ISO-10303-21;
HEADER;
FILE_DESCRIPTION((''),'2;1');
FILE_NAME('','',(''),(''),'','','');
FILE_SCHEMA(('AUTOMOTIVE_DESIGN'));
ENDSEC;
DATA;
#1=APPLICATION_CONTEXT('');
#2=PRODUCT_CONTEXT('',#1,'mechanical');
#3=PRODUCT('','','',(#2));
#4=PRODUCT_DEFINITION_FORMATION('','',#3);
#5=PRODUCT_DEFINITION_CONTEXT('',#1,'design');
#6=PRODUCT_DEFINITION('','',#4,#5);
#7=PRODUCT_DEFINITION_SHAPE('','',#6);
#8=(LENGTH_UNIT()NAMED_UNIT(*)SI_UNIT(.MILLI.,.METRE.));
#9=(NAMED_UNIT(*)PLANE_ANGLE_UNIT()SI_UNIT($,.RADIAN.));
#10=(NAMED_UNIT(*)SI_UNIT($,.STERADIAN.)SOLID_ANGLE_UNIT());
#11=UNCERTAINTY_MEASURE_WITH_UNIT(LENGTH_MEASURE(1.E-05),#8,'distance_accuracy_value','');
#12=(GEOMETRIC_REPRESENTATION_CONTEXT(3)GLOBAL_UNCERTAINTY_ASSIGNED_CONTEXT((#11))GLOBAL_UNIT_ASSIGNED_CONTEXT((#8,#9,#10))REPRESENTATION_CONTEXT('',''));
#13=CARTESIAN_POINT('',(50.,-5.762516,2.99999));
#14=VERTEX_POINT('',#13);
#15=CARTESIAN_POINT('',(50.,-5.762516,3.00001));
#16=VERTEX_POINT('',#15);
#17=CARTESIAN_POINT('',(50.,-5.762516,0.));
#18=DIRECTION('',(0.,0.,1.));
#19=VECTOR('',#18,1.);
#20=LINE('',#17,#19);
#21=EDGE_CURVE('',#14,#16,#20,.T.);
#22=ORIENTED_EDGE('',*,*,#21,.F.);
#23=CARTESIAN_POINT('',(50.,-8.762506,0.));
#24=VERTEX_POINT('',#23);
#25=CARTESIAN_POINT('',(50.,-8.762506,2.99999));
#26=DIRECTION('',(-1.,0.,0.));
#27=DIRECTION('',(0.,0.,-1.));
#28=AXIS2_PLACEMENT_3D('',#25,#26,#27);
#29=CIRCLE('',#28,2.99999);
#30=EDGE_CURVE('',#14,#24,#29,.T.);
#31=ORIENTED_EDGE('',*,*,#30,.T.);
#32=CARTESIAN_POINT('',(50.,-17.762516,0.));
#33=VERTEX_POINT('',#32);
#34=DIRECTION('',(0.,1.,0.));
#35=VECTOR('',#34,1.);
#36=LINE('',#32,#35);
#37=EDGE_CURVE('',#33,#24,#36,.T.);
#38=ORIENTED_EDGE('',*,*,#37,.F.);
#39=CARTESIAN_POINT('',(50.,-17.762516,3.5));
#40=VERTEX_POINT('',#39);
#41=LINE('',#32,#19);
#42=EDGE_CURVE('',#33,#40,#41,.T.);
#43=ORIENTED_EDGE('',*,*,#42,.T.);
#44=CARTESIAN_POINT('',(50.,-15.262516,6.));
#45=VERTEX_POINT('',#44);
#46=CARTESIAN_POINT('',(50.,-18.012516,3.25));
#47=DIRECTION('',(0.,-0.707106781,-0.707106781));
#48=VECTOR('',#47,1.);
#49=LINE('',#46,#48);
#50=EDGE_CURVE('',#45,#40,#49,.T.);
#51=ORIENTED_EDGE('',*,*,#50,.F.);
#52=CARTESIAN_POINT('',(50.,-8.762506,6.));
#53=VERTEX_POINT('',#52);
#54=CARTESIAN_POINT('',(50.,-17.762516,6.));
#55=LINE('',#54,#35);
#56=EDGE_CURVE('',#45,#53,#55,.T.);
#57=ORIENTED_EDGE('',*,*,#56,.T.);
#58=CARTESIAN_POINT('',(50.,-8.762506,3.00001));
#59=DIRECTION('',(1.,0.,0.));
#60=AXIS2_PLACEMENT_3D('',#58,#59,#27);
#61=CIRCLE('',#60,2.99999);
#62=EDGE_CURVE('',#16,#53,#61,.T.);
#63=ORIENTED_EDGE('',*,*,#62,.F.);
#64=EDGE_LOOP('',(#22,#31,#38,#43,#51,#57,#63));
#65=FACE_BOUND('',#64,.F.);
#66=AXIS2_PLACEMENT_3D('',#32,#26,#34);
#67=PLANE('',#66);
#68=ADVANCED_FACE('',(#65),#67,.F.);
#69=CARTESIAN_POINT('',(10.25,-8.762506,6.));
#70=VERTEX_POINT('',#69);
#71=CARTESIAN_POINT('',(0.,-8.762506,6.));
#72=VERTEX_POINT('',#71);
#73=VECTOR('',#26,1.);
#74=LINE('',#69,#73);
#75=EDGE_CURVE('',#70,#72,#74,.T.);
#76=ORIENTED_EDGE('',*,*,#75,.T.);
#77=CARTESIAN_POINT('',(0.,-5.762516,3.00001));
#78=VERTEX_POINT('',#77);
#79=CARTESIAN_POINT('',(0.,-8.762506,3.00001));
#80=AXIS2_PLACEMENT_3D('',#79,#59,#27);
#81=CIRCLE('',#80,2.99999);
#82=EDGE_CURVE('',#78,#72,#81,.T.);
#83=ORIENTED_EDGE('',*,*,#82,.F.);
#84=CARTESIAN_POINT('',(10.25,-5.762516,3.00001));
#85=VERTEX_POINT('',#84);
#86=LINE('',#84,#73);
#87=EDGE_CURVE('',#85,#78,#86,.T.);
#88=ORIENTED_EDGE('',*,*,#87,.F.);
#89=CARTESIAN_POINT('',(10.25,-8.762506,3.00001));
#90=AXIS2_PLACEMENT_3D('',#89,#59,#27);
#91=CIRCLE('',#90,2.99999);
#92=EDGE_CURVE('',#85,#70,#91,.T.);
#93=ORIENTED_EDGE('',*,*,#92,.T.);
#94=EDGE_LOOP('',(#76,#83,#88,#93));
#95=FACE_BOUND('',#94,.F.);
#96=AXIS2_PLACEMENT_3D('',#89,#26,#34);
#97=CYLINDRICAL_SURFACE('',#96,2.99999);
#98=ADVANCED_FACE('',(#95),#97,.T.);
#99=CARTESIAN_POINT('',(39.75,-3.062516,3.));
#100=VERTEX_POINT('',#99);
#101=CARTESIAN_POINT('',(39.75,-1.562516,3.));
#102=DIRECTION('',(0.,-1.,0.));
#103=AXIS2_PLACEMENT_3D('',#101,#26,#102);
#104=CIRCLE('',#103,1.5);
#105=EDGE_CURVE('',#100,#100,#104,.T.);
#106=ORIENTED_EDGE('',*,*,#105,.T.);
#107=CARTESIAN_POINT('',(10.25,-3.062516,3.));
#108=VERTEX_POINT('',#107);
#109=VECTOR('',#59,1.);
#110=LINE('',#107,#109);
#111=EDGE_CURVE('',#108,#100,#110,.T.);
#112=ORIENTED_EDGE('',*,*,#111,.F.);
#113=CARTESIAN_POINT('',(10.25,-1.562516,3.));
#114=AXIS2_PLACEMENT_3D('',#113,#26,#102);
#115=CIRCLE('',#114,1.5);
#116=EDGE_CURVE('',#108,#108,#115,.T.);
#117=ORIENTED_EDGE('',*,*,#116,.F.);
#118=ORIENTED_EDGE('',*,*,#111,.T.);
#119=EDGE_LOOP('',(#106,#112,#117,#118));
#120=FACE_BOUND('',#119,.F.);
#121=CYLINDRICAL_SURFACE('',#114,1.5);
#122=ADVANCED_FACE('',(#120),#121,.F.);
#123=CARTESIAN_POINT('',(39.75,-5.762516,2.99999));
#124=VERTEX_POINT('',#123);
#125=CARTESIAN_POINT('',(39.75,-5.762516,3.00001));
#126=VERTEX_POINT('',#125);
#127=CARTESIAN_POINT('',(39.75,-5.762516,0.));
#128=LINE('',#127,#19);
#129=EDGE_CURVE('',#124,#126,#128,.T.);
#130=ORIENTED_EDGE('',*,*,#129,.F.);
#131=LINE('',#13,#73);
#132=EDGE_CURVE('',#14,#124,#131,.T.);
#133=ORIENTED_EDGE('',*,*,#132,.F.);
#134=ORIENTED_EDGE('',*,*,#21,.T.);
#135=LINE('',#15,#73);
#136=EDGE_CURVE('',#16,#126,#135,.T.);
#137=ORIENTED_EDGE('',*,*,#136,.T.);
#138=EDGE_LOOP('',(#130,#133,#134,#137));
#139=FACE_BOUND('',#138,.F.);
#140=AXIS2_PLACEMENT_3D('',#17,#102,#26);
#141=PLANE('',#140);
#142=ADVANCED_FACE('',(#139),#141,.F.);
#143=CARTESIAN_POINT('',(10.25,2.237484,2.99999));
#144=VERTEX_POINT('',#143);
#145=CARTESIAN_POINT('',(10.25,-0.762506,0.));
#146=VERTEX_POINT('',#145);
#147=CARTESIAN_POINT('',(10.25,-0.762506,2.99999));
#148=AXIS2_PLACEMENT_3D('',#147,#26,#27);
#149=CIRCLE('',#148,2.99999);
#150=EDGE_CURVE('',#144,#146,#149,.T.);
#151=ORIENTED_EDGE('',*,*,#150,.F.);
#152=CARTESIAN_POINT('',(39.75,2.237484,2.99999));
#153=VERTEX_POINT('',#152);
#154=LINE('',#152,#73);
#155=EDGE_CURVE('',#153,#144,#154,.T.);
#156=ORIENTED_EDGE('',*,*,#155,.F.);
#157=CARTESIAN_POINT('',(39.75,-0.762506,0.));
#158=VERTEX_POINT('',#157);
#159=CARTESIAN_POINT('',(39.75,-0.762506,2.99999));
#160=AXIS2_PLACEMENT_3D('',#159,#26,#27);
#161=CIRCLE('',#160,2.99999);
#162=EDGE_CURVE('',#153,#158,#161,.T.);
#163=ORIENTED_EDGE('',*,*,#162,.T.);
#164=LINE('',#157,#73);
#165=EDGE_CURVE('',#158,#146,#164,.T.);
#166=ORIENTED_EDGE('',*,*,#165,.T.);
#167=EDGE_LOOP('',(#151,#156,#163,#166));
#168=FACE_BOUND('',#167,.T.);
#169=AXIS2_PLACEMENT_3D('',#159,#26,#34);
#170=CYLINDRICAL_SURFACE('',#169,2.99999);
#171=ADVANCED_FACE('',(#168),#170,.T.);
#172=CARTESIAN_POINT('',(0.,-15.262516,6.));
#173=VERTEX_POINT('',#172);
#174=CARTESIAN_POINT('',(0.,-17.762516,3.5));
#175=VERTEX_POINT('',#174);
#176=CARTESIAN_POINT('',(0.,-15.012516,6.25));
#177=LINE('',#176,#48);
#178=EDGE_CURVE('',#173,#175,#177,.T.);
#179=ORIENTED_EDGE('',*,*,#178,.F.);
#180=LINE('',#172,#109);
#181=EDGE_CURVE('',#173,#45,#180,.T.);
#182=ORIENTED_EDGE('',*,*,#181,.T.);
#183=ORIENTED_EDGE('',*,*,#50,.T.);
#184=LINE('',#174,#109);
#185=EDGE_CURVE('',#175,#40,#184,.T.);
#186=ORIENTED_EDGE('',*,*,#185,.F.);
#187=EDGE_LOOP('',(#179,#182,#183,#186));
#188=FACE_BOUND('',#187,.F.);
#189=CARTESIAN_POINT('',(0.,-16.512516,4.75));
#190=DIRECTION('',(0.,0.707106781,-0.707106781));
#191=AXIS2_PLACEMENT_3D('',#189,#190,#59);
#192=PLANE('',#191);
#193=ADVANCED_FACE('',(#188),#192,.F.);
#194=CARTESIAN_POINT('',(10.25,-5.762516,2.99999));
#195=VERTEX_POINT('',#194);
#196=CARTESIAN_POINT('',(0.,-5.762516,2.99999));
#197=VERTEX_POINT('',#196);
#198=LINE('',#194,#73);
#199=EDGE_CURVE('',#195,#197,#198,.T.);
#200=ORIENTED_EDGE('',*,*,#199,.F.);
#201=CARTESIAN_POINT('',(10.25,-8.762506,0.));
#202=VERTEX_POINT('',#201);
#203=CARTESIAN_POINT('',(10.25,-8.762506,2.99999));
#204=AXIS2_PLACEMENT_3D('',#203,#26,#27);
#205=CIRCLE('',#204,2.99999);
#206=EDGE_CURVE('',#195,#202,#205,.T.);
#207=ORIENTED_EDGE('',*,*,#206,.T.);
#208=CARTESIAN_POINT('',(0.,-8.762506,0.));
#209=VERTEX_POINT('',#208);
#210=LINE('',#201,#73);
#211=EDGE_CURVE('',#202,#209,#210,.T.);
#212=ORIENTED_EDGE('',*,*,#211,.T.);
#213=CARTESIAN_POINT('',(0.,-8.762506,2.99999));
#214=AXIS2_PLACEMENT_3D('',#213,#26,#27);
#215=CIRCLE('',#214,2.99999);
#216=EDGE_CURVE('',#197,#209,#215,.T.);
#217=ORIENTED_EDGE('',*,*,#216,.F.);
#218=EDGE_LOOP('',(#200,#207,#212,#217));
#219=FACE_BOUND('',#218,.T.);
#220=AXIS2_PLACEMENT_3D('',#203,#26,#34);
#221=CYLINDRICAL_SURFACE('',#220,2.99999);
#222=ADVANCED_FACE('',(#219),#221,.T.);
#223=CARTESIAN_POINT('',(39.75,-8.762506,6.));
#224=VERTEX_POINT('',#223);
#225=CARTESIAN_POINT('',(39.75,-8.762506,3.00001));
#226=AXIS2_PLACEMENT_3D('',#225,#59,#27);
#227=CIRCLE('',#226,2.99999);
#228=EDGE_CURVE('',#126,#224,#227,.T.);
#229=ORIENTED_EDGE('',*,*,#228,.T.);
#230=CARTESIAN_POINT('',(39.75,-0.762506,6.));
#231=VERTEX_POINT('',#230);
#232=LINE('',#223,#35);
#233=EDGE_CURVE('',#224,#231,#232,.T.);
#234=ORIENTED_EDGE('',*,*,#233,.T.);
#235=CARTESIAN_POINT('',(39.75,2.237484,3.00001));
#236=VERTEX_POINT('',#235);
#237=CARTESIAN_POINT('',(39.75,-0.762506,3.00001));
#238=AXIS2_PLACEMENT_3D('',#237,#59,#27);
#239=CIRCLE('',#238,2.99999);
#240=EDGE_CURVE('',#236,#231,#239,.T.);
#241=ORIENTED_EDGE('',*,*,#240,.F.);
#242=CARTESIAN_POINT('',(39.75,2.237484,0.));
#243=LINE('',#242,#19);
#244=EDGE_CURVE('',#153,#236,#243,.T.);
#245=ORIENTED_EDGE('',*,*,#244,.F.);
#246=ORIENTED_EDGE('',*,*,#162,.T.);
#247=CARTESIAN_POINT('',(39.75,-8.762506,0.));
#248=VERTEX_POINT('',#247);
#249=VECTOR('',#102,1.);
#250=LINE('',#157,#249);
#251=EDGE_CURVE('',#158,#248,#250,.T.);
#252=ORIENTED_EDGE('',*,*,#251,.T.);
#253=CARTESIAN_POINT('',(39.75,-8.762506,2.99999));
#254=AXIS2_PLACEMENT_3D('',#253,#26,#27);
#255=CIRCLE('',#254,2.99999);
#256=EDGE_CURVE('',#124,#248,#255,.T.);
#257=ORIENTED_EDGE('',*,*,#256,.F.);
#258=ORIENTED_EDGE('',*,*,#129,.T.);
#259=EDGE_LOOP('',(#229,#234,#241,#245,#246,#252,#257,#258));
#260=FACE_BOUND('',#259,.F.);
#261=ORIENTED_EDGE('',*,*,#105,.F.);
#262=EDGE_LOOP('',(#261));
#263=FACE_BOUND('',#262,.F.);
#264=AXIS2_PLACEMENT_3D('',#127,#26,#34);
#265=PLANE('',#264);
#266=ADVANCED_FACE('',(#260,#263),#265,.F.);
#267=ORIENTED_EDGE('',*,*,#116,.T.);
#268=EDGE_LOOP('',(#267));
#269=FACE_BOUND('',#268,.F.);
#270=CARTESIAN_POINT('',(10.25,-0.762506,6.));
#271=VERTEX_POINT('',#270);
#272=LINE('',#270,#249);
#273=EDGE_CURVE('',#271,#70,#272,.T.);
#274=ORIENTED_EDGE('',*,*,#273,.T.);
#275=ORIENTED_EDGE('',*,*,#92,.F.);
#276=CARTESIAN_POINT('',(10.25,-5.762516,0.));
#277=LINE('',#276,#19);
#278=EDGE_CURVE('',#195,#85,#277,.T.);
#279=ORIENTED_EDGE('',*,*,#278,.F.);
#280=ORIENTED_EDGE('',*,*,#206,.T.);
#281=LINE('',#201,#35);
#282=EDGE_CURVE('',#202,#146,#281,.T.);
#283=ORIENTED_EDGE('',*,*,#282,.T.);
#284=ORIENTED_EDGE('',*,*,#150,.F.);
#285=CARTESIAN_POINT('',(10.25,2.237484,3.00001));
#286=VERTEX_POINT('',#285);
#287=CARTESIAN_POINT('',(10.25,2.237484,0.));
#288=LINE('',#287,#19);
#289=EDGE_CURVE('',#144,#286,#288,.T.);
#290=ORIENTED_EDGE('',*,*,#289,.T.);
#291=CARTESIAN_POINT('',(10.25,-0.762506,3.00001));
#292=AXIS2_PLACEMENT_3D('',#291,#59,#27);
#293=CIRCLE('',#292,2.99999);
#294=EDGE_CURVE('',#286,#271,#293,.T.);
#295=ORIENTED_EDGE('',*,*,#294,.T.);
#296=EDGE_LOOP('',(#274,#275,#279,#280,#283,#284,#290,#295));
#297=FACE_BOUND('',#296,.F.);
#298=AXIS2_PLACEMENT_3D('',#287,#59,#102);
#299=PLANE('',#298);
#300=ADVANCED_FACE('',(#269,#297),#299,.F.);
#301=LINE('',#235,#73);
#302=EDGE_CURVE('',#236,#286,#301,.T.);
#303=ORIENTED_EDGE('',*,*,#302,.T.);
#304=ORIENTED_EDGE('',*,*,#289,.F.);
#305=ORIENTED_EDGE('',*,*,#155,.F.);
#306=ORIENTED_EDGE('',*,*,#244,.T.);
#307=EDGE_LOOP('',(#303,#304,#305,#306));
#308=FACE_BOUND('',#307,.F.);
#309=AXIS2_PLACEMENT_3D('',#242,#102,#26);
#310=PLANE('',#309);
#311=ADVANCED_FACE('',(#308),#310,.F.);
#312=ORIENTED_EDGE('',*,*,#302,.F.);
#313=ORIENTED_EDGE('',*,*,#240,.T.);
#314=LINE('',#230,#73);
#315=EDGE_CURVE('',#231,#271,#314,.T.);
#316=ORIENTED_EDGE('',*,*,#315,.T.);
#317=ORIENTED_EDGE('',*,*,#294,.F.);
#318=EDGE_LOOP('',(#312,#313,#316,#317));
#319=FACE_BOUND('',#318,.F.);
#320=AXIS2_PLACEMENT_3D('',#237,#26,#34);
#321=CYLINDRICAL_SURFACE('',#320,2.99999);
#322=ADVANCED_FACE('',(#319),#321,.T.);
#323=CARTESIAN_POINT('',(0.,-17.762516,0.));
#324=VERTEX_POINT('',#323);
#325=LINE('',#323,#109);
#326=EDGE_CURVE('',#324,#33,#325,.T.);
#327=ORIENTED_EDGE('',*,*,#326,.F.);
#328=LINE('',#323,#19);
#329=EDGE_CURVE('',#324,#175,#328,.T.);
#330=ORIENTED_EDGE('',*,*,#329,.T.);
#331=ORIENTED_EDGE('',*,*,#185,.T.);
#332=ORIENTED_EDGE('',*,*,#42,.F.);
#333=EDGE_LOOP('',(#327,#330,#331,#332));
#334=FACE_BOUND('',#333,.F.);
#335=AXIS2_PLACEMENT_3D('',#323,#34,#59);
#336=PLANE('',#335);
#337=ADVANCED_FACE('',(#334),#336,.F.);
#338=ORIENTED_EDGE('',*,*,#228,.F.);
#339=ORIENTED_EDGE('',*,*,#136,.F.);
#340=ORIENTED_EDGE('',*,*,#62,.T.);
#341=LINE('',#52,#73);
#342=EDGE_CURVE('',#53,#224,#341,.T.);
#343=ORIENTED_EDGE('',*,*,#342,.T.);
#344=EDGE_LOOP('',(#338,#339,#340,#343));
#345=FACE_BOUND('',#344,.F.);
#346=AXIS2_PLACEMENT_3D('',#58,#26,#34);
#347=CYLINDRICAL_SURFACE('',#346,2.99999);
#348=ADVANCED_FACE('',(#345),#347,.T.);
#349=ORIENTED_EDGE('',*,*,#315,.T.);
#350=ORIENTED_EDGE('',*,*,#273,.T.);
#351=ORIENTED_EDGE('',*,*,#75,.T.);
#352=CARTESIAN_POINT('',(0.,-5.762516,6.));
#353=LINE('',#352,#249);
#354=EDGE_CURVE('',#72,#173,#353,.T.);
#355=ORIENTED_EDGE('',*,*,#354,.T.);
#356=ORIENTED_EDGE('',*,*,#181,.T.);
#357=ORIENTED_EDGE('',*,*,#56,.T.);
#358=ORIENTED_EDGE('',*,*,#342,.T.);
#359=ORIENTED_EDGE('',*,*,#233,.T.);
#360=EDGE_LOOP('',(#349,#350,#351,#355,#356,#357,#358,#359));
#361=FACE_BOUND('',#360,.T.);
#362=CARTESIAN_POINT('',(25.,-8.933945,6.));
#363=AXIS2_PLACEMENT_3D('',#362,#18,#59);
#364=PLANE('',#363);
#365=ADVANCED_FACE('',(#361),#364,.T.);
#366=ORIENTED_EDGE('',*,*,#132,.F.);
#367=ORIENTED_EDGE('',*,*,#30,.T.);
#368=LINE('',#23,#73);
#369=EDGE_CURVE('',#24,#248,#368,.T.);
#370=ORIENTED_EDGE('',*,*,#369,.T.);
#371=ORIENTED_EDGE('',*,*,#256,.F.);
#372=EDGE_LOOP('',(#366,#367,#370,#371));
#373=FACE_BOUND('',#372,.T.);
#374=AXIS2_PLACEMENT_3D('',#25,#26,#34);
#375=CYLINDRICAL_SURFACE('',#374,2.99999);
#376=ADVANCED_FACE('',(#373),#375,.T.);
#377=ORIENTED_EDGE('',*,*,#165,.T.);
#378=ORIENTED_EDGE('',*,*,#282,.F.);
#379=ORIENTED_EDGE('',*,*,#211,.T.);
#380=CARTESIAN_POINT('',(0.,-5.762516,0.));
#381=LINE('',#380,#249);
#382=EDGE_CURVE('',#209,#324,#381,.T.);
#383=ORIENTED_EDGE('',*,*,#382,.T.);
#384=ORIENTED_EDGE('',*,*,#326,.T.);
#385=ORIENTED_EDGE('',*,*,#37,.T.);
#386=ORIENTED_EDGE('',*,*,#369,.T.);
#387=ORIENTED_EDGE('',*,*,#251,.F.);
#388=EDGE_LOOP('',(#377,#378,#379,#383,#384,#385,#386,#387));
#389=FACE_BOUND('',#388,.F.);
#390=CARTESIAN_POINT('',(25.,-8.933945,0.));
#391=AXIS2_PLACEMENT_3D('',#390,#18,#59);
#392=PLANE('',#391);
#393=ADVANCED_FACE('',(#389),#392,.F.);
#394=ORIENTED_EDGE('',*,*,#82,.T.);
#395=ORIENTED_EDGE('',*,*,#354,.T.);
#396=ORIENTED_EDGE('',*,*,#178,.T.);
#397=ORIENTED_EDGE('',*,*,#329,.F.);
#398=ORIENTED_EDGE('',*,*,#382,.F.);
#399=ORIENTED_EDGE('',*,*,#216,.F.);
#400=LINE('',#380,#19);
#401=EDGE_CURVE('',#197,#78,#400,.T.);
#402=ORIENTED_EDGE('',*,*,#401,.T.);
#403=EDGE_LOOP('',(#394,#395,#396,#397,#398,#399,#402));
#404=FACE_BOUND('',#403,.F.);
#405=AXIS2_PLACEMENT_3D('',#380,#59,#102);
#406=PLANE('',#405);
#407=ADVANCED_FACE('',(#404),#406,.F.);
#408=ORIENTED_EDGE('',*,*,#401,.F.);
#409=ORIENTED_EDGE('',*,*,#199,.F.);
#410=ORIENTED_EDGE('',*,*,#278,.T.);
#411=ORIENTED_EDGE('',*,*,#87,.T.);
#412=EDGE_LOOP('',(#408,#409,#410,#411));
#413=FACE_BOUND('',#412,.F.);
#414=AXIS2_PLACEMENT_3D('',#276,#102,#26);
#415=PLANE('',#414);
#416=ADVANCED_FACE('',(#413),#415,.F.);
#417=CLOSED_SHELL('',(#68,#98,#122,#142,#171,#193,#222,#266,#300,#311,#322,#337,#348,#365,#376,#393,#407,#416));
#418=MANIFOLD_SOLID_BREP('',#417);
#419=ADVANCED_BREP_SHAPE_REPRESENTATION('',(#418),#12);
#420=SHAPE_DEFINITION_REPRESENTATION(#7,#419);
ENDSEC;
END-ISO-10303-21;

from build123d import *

# Parameters (mm, degrees)
F1_DEPTH = 6
F2_R     = 2.99999
F3_R     = 1.5
F4_DEPTH = 39.751
F5_SIZE  = 2.5


# Not quite as in the source:
# - a fillet or chamfer is up to 0.001 mm smaller than in the source, because OpenCascade refuses the exact size


with BuildPart() as f1:
    # F0 (on Top) → F1 (new body)
    with BuildSketch(Plane.XY):
        Polygon((0, -5.7625164015), (0, -17.7625164015), (50, -17.7625164015), (50, -5.7625164015), (39.75, -5.7625164015), (39.75, 2.2374835985), (10.25, 2.2374835985), (10.25, -5.7625164015), align=None)
    extrude(amount=F1_DEPTH)

    # F2 (radius 3 in the source; OpenCascade refuses exactly that, so slightly less here)
    f2_edges = [f1.edges().sort_by_distance(p)[0] for p in [
        (25, 2.237484, 6),
        (25, 2.237484, 0),
        (5.125, -5.762516, 6),
        (44.875, -5.762516, 6),
        (5.125, -5.762516, 0),
        (44.875, -5.762516, 0),
    ]]
    fillet(f2_edges, radius=F2_R)

    # F3 (on face) → F4 (cut, through all)
    with BuildSketch(Plane(origin=(10.25, 0, 0), x_dir=(0, -1, 0), z_dir=(-1, 0, 0))):
        with Locations((1.5625164015, 3)):
            Circle(F3_R)
    extrude(amount=-F4_DEPTH, mode=Mode.SUBTRACT)

    # F5
    f5_edges = [f1.edges().sort_by_distance(p)[0] for p in [
        (25, -17.762516, 6),
    ]]
    chamfer(f5_edges, length=F5_SIZE)


solid = f1.part
